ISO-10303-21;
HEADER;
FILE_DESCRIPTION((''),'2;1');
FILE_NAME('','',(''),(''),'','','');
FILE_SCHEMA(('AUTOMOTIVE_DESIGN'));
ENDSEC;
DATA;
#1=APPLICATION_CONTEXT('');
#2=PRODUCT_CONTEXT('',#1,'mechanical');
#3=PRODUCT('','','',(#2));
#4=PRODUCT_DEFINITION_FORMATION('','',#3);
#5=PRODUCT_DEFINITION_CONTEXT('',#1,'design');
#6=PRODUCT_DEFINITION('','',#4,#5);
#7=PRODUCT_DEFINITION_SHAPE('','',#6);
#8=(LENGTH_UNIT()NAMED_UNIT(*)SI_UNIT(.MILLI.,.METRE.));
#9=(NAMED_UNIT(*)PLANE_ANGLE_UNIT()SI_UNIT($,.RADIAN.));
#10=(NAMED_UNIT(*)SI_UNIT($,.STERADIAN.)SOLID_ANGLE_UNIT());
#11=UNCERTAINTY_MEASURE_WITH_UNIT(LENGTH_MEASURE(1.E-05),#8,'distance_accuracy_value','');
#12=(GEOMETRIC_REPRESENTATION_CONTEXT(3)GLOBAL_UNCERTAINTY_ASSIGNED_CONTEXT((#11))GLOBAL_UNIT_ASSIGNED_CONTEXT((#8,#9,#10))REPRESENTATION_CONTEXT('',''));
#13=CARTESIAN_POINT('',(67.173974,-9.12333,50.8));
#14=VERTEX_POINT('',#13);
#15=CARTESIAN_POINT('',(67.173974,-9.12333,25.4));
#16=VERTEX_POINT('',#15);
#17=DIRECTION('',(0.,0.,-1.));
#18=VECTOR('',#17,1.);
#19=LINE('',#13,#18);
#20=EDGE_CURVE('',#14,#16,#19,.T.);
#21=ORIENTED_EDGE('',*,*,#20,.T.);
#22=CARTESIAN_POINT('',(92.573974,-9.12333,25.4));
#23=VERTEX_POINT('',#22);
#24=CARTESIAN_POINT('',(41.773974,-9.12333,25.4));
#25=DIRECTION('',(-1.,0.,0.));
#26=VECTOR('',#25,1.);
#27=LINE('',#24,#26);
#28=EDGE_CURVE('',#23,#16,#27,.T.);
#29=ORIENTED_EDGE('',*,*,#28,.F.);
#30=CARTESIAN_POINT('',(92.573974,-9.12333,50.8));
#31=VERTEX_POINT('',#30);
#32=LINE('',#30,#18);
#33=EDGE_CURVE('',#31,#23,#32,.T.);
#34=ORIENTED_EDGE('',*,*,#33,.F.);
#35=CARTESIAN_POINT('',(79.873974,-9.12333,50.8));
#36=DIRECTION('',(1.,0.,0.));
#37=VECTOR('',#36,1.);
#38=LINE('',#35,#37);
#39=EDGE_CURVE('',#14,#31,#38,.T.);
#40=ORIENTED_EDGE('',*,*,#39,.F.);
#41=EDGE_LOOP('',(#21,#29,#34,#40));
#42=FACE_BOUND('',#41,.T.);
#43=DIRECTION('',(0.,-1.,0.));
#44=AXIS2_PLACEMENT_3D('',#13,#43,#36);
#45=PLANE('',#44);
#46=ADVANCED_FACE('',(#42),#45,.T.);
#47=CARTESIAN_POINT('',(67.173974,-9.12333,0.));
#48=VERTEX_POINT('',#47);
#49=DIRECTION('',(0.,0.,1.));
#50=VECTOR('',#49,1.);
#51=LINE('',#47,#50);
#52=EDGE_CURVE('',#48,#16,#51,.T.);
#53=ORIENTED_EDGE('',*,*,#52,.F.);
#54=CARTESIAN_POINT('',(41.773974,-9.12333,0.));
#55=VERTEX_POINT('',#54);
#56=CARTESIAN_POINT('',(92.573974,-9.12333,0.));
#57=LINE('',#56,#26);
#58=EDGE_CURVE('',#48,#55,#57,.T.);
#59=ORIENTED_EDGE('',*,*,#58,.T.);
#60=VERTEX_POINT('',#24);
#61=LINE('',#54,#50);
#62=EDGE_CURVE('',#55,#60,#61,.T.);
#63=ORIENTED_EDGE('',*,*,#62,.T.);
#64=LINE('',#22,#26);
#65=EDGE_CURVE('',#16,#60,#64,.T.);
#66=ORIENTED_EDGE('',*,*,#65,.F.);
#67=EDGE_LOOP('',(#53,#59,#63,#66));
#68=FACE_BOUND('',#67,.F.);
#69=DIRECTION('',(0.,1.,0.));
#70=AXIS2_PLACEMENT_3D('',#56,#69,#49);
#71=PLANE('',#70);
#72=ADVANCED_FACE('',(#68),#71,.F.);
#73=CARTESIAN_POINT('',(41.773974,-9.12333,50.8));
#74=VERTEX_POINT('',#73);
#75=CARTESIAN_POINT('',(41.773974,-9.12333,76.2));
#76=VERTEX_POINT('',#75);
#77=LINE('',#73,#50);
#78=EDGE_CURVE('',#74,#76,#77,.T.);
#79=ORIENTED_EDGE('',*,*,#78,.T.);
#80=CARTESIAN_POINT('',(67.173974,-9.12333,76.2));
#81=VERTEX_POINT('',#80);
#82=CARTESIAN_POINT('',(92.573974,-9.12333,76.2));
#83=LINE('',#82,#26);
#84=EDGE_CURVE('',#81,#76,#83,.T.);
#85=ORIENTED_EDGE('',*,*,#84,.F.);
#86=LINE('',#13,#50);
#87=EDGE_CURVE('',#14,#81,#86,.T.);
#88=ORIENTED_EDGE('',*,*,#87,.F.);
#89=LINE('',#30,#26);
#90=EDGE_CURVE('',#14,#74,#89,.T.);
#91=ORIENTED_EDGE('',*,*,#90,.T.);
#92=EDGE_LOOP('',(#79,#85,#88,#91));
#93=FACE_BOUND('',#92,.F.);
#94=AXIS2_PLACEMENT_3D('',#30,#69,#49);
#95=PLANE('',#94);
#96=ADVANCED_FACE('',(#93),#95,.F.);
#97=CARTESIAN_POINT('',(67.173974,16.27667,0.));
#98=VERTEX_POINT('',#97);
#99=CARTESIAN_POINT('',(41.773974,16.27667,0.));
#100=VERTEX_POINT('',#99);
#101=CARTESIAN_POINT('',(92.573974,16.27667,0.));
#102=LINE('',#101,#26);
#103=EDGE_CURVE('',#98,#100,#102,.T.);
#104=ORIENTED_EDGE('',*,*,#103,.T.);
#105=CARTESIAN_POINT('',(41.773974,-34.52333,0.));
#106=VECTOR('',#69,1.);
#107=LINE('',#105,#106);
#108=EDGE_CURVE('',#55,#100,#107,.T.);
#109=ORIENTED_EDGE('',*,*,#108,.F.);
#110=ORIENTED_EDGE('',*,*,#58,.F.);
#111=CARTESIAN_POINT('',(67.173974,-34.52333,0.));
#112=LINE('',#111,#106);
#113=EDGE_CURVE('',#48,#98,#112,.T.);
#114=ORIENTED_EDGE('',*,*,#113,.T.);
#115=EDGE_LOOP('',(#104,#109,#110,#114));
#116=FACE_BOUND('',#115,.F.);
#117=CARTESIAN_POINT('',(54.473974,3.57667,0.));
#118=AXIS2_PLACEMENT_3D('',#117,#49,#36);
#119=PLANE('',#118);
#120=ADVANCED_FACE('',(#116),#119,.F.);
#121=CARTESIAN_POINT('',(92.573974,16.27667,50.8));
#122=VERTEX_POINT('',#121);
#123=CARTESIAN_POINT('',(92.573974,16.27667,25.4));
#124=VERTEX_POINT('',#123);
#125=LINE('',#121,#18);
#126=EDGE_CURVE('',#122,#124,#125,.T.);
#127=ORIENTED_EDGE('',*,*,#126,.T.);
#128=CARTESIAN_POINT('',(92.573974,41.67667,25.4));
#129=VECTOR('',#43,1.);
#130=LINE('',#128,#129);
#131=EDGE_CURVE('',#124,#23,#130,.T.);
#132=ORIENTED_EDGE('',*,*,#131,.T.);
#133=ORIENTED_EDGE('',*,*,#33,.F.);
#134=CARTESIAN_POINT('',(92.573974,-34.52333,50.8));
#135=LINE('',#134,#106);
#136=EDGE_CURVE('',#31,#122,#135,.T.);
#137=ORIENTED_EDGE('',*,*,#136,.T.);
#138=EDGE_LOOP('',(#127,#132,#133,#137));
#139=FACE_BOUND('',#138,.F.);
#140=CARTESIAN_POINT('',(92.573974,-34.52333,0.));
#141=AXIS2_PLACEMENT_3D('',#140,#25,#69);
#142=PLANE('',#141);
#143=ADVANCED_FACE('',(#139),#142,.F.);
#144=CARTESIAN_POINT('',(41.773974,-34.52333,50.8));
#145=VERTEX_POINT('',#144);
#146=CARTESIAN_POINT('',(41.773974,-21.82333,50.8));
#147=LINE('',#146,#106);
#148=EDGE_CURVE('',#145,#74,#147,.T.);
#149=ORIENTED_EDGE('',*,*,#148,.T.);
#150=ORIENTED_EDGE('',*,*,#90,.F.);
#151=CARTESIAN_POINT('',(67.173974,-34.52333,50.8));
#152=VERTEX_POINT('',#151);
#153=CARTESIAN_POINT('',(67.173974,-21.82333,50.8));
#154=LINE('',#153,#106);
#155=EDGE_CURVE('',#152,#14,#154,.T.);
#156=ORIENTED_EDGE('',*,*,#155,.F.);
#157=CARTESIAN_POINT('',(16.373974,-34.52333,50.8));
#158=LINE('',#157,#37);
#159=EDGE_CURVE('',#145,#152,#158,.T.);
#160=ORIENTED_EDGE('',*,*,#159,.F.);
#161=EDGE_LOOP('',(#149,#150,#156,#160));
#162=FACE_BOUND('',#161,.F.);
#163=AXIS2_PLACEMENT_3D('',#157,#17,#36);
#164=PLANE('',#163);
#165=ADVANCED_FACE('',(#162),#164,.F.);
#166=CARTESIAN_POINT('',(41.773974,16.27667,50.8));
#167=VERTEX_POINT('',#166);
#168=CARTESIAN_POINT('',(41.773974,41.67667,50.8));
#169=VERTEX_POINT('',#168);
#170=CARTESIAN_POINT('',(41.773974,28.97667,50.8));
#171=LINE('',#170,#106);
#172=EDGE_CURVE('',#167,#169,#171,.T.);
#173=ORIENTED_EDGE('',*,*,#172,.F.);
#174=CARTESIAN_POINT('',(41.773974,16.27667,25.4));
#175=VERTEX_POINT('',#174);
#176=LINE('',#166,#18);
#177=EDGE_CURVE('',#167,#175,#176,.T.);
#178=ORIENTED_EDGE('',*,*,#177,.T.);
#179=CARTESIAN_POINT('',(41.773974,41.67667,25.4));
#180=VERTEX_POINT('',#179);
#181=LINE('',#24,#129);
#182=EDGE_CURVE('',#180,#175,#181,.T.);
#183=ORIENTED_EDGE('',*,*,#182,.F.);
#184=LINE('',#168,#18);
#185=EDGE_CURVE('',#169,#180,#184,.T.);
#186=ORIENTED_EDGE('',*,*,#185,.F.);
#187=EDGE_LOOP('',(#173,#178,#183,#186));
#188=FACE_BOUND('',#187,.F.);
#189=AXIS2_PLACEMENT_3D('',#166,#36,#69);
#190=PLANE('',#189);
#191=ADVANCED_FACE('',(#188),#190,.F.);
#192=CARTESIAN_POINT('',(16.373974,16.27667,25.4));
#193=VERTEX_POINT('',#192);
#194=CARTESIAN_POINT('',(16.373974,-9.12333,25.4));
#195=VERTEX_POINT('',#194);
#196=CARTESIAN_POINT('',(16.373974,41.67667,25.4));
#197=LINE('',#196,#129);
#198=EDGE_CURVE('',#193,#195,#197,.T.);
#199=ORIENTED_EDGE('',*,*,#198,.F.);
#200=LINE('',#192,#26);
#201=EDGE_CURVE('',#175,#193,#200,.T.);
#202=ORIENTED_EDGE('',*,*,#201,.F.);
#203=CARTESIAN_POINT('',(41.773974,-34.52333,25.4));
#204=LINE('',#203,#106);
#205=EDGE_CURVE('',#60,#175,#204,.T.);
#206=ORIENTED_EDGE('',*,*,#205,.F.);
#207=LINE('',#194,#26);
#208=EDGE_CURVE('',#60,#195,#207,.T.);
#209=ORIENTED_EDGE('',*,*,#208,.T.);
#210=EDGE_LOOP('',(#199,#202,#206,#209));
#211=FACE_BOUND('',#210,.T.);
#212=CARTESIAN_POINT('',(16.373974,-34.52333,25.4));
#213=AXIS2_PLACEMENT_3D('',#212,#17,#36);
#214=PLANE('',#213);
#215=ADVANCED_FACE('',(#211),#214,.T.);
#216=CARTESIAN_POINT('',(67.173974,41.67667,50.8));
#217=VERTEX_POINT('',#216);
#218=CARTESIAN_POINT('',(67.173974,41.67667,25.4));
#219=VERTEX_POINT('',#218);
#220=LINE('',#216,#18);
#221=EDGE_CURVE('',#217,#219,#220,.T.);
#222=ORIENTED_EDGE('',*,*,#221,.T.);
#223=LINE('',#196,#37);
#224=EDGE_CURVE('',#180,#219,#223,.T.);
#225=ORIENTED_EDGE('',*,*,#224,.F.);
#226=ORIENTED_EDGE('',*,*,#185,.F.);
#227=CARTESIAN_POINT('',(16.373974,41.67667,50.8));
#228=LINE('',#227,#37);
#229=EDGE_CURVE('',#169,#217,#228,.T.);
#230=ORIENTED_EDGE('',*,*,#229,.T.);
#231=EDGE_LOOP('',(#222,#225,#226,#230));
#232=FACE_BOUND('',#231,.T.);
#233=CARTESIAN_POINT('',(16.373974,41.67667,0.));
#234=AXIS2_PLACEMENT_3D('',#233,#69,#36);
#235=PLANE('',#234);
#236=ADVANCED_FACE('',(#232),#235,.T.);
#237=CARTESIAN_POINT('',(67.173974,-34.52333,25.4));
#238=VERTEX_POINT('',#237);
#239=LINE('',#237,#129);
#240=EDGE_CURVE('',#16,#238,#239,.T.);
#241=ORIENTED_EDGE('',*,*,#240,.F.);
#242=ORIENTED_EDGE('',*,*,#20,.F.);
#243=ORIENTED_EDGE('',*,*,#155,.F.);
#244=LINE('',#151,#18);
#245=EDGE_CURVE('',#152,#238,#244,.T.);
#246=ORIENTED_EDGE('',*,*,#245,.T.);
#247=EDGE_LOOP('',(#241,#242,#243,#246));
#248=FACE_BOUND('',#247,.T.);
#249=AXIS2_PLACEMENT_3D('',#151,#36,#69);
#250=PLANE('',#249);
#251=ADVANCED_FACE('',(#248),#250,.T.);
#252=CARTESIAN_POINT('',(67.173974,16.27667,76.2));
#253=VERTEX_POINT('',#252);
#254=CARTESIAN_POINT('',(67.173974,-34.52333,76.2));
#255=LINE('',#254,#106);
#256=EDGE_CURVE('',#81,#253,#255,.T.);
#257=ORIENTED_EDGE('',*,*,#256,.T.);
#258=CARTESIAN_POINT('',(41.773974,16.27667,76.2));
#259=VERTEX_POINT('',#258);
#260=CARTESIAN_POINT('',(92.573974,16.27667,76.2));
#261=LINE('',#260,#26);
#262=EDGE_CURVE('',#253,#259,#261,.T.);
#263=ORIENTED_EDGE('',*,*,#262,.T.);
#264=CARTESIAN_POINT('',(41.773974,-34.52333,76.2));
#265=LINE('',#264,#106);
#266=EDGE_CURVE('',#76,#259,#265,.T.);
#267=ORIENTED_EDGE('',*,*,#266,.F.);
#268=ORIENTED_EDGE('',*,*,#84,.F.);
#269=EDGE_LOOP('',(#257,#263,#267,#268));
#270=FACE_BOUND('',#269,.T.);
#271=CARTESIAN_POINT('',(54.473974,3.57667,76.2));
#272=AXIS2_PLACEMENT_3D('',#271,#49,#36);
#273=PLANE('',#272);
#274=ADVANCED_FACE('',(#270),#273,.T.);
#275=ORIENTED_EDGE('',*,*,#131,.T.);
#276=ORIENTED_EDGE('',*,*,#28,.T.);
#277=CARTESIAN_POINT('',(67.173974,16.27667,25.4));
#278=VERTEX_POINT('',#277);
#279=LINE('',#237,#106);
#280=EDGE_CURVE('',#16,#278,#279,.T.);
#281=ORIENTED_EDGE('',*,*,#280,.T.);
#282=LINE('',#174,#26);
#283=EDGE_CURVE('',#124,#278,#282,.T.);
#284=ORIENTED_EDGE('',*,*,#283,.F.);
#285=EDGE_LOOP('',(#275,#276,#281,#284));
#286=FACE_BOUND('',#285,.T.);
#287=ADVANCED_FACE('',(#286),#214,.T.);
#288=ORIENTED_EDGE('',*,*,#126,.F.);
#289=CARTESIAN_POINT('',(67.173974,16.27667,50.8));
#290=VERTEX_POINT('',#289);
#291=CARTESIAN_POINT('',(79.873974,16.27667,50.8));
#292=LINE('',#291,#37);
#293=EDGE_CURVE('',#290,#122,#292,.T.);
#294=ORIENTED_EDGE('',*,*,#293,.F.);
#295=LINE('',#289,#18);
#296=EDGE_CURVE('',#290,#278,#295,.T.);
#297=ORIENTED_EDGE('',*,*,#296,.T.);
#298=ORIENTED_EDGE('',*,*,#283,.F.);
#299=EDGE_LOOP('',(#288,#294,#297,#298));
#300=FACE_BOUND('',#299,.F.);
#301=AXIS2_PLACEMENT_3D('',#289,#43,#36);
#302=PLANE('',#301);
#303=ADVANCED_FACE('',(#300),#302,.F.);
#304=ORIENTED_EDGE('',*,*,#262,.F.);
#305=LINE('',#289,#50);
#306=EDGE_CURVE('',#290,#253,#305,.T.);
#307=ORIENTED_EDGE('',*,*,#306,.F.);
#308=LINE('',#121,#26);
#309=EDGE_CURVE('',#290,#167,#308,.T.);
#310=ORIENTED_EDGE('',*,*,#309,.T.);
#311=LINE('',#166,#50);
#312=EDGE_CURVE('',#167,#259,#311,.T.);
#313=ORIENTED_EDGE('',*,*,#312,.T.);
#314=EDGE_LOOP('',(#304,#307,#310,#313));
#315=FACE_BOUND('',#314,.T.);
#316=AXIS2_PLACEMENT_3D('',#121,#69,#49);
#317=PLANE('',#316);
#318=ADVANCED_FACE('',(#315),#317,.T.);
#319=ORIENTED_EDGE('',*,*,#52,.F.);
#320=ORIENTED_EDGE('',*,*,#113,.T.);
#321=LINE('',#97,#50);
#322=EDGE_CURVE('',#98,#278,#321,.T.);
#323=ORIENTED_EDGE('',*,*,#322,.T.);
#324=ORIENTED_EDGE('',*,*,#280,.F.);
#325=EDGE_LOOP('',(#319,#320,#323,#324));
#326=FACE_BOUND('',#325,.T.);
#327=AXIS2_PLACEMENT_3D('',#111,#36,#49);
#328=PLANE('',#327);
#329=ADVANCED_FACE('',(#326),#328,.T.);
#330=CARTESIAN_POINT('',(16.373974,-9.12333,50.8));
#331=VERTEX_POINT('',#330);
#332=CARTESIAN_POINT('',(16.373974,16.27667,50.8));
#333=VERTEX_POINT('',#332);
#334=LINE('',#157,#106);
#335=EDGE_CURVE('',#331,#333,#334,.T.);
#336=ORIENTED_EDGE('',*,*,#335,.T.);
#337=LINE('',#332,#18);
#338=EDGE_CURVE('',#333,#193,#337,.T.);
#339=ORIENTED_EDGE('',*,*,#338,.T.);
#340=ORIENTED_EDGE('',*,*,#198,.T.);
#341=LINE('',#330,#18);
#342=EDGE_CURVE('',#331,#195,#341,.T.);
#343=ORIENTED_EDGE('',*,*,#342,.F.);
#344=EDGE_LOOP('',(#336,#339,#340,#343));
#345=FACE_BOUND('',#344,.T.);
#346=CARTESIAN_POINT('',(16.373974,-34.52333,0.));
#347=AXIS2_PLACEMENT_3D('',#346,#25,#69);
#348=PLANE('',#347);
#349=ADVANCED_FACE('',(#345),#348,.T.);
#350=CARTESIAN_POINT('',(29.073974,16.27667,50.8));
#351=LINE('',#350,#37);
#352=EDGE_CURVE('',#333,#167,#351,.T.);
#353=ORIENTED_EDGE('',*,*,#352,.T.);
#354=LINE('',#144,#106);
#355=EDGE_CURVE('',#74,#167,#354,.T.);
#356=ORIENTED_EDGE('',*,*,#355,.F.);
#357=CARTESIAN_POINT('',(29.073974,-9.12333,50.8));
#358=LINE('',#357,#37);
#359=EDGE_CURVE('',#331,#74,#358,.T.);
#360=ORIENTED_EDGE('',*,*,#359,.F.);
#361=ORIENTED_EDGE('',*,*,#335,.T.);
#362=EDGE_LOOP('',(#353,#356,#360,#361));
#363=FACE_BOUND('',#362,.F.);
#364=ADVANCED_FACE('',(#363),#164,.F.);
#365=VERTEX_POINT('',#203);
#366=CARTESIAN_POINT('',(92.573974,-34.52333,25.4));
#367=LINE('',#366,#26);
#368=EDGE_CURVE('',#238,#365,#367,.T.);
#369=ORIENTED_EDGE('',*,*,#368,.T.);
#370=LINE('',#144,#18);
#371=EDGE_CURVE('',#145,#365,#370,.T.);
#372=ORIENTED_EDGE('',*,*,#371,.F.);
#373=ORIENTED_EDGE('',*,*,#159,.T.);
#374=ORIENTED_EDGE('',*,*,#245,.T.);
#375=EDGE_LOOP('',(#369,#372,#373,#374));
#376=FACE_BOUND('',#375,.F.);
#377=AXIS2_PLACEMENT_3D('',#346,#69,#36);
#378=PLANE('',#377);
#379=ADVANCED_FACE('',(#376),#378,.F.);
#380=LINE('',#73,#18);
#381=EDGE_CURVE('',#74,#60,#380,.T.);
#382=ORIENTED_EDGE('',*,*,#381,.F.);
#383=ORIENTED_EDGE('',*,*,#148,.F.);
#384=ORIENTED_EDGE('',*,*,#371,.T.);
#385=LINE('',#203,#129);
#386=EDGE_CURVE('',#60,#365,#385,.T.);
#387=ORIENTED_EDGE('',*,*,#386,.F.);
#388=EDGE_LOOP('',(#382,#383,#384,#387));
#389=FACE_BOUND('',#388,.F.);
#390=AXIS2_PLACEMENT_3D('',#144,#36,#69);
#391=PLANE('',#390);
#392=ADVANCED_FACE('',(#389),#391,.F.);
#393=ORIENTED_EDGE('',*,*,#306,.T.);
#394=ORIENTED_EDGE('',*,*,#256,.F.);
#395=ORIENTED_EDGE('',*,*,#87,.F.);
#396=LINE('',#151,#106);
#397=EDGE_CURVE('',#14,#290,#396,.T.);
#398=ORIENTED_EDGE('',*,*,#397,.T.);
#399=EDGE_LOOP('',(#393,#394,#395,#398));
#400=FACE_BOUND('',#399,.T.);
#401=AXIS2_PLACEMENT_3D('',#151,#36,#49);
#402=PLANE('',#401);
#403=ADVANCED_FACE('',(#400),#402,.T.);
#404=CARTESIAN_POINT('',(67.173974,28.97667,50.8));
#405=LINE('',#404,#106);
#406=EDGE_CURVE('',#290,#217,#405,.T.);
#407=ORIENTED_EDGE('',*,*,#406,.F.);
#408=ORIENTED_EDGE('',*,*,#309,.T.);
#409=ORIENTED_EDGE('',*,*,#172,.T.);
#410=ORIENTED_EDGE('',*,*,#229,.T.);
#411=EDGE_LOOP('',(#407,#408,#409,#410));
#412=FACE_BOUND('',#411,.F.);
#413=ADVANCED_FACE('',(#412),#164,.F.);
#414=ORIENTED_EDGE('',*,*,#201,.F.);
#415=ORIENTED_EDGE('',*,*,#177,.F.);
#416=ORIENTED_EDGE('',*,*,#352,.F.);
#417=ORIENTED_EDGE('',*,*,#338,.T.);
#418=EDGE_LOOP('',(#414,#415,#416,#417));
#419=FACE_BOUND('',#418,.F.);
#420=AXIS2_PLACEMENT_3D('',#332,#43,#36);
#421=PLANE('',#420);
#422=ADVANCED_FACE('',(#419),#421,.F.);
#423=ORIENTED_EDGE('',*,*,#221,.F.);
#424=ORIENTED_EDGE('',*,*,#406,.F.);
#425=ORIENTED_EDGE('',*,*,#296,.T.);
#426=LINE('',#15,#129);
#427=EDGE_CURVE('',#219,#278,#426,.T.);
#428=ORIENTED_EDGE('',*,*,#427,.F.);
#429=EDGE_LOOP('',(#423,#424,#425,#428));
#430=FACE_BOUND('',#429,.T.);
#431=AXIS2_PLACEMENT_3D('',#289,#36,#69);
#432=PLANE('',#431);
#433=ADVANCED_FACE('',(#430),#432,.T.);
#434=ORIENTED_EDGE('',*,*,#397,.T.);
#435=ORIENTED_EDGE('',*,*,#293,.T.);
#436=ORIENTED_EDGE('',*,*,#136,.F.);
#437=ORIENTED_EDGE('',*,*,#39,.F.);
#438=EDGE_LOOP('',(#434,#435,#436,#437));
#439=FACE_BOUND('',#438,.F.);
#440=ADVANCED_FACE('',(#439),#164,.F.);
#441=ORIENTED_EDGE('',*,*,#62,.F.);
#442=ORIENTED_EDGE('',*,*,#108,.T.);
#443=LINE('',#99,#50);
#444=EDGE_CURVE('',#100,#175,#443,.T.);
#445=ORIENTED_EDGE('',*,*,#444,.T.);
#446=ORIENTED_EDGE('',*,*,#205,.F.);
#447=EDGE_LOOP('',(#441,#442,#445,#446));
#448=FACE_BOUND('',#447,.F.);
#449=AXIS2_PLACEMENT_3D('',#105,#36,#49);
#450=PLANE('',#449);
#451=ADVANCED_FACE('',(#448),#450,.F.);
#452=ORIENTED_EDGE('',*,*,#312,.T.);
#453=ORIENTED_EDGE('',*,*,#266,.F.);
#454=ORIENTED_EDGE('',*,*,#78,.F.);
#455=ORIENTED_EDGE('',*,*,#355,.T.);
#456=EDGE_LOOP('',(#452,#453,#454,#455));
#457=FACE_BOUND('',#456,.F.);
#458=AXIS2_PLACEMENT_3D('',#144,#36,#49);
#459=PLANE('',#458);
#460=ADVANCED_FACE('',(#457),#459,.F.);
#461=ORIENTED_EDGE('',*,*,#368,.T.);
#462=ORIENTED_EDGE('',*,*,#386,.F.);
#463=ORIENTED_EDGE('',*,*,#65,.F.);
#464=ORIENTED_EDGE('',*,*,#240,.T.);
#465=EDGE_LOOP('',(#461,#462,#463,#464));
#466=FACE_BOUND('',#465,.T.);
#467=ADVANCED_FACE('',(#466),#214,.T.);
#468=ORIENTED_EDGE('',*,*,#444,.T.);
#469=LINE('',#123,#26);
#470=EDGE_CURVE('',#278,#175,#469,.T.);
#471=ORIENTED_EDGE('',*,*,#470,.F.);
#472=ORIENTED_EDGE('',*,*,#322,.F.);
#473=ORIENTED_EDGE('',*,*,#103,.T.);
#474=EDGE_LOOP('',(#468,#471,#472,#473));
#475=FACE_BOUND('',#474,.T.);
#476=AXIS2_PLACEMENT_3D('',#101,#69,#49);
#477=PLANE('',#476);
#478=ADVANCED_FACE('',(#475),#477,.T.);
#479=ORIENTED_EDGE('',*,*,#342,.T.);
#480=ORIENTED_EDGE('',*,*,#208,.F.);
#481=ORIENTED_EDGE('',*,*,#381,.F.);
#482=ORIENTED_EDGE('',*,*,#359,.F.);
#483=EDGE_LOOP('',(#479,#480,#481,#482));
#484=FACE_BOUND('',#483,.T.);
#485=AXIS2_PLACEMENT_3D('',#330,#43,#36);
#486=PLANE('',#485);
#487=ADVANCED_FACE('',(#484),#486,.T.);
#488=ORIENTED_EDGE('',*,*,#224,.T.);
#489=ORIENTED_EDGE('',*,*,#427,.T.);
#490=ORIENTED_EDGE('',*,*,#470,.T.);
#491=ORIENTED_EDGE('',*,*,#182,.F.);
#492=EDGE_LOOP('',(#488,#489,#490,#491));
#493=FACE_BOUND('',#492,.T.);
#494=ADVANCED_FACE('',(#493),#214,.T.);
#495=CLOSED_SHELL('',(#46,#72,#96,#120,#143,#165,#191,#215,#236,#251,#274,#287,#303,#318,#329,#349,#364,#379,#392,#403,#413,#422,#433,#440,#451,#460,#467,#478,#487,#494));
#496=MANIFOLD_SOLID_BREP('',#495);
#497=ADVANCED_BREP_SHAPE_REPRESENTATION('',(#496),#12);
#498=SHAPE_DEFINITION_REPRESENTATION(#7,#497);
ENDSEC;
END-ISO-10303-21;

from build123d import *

# Parameters (mm, degrees)
F0_R      = 13.9889248678
F1_DEPTH  = 25.4
F2_SIZE   = 12.69999
F3_W      = 76.2
F3_H      = 76.2
F4_DEPTH  = 76.2
F5_W      = 25.4
F5_H      = 25.4
F7_DEPTH  = 76.2
F8_W      = 25.4
F8_H      = 25.4
F9_DEPTH  = 76.2
F10_W     = 25.4
F10_H     = 25.4
F11_DEPTH = 76.2


# Not quite as in the source:
# - a fillet or chamfer is up to 0.001 mm smaller than in the source, because OpenCascade refuses the exact size


with BuildPart() as f1:
    # F0 (on Top) → F1 (new body)
    with BuildSketch(Plane.XY):
        with Locations((-42.8192056715, -23.4777331352)):
            Circle(F0_R)
    extrude(amount=F1_DEPTH)

    # F2 (size 12.7 in the source; OpenCascade refuses exactly that, so slightly less here)
    f2_edges = [f1.edges().sort_by_distance(p)[0] for p in [
        (-28.830281, -23.477733, 12.7),
        (-56.808131, -23.477733, 0),
        (-56.808131, -23.477733, 25.4),
    ]]
    chamfer(f2_edges, length=F2_SIZE)


with BuildPart() as f4:
    # F3 (on Top) → F4 (new body)
    with BuildSketch(Plane.XY):
        with Locations((54.4739740274, 3.576669842)):
            Rectangle(F3_W, F3_H)
    extrude(amount=F4_DEPTH)

    # F5 (on face) → F7 (cut)
    with BuildSketch(Plane.XZ.offset(34.523330158)):
        with Locations((29.0739740274, 63.5)):
            Rectangle(F5_W, F5_H)
        with Locations((79.8739740274, 63.5)):
            Rectangle(F5_W, F5_H)
        with Locations((79.8739740274, 12.7)):
            Rectangle(F5_W, F5_H)
        with Locations((29.0739740274, 12.7)):
            Rectangle(F5_W, F5_H)
    extrude(amount=-F7_DEPTH, mode=Mode.SUBTRACT)

    # F8 (on face) → F9 (cut)
    with BuildSketch(Plane.YZ.offset(92.5739740274)):
        with Locations((-21.823330158, 12.7)):
            Rectangle(F8_W, F8_H)
        with Locations((-21.823330158, 63.5)):
            Rectangle(F8_W, F8_H)
        with Locations((28.976669842, 63.5)):
            Rectangle(F8_W, F8_H)
        with Locations((28.976669842, 12.7)):
            Rectangle(F8_W, F8_H)
    extrude(amount=-F9_DEPTH, mode=Mode.SUBTRACT)

    # F10 (on face) → F11 (cut)
    with BuildSketch(Plane.XY.offset(50.8)):
        with Locations((79.8739740274, -21.823330158)):
            Rectangle(F10_W, F10_H)
        with Locations((79.8739740274, 28.976669842)):
            Rectangle(F10_W, F10_H)
        with Locations((29.0739740274, 28.976669842)):
            Rectangle(F10_W, F10_H)
        with Locations((29.0739740274, -21.823330158)):
            Rectangle(F10_W, F10_H)
    extrude(amount=-F11_DEPTH, mode=Mode.SUBTRACT)


solid = f4.part
